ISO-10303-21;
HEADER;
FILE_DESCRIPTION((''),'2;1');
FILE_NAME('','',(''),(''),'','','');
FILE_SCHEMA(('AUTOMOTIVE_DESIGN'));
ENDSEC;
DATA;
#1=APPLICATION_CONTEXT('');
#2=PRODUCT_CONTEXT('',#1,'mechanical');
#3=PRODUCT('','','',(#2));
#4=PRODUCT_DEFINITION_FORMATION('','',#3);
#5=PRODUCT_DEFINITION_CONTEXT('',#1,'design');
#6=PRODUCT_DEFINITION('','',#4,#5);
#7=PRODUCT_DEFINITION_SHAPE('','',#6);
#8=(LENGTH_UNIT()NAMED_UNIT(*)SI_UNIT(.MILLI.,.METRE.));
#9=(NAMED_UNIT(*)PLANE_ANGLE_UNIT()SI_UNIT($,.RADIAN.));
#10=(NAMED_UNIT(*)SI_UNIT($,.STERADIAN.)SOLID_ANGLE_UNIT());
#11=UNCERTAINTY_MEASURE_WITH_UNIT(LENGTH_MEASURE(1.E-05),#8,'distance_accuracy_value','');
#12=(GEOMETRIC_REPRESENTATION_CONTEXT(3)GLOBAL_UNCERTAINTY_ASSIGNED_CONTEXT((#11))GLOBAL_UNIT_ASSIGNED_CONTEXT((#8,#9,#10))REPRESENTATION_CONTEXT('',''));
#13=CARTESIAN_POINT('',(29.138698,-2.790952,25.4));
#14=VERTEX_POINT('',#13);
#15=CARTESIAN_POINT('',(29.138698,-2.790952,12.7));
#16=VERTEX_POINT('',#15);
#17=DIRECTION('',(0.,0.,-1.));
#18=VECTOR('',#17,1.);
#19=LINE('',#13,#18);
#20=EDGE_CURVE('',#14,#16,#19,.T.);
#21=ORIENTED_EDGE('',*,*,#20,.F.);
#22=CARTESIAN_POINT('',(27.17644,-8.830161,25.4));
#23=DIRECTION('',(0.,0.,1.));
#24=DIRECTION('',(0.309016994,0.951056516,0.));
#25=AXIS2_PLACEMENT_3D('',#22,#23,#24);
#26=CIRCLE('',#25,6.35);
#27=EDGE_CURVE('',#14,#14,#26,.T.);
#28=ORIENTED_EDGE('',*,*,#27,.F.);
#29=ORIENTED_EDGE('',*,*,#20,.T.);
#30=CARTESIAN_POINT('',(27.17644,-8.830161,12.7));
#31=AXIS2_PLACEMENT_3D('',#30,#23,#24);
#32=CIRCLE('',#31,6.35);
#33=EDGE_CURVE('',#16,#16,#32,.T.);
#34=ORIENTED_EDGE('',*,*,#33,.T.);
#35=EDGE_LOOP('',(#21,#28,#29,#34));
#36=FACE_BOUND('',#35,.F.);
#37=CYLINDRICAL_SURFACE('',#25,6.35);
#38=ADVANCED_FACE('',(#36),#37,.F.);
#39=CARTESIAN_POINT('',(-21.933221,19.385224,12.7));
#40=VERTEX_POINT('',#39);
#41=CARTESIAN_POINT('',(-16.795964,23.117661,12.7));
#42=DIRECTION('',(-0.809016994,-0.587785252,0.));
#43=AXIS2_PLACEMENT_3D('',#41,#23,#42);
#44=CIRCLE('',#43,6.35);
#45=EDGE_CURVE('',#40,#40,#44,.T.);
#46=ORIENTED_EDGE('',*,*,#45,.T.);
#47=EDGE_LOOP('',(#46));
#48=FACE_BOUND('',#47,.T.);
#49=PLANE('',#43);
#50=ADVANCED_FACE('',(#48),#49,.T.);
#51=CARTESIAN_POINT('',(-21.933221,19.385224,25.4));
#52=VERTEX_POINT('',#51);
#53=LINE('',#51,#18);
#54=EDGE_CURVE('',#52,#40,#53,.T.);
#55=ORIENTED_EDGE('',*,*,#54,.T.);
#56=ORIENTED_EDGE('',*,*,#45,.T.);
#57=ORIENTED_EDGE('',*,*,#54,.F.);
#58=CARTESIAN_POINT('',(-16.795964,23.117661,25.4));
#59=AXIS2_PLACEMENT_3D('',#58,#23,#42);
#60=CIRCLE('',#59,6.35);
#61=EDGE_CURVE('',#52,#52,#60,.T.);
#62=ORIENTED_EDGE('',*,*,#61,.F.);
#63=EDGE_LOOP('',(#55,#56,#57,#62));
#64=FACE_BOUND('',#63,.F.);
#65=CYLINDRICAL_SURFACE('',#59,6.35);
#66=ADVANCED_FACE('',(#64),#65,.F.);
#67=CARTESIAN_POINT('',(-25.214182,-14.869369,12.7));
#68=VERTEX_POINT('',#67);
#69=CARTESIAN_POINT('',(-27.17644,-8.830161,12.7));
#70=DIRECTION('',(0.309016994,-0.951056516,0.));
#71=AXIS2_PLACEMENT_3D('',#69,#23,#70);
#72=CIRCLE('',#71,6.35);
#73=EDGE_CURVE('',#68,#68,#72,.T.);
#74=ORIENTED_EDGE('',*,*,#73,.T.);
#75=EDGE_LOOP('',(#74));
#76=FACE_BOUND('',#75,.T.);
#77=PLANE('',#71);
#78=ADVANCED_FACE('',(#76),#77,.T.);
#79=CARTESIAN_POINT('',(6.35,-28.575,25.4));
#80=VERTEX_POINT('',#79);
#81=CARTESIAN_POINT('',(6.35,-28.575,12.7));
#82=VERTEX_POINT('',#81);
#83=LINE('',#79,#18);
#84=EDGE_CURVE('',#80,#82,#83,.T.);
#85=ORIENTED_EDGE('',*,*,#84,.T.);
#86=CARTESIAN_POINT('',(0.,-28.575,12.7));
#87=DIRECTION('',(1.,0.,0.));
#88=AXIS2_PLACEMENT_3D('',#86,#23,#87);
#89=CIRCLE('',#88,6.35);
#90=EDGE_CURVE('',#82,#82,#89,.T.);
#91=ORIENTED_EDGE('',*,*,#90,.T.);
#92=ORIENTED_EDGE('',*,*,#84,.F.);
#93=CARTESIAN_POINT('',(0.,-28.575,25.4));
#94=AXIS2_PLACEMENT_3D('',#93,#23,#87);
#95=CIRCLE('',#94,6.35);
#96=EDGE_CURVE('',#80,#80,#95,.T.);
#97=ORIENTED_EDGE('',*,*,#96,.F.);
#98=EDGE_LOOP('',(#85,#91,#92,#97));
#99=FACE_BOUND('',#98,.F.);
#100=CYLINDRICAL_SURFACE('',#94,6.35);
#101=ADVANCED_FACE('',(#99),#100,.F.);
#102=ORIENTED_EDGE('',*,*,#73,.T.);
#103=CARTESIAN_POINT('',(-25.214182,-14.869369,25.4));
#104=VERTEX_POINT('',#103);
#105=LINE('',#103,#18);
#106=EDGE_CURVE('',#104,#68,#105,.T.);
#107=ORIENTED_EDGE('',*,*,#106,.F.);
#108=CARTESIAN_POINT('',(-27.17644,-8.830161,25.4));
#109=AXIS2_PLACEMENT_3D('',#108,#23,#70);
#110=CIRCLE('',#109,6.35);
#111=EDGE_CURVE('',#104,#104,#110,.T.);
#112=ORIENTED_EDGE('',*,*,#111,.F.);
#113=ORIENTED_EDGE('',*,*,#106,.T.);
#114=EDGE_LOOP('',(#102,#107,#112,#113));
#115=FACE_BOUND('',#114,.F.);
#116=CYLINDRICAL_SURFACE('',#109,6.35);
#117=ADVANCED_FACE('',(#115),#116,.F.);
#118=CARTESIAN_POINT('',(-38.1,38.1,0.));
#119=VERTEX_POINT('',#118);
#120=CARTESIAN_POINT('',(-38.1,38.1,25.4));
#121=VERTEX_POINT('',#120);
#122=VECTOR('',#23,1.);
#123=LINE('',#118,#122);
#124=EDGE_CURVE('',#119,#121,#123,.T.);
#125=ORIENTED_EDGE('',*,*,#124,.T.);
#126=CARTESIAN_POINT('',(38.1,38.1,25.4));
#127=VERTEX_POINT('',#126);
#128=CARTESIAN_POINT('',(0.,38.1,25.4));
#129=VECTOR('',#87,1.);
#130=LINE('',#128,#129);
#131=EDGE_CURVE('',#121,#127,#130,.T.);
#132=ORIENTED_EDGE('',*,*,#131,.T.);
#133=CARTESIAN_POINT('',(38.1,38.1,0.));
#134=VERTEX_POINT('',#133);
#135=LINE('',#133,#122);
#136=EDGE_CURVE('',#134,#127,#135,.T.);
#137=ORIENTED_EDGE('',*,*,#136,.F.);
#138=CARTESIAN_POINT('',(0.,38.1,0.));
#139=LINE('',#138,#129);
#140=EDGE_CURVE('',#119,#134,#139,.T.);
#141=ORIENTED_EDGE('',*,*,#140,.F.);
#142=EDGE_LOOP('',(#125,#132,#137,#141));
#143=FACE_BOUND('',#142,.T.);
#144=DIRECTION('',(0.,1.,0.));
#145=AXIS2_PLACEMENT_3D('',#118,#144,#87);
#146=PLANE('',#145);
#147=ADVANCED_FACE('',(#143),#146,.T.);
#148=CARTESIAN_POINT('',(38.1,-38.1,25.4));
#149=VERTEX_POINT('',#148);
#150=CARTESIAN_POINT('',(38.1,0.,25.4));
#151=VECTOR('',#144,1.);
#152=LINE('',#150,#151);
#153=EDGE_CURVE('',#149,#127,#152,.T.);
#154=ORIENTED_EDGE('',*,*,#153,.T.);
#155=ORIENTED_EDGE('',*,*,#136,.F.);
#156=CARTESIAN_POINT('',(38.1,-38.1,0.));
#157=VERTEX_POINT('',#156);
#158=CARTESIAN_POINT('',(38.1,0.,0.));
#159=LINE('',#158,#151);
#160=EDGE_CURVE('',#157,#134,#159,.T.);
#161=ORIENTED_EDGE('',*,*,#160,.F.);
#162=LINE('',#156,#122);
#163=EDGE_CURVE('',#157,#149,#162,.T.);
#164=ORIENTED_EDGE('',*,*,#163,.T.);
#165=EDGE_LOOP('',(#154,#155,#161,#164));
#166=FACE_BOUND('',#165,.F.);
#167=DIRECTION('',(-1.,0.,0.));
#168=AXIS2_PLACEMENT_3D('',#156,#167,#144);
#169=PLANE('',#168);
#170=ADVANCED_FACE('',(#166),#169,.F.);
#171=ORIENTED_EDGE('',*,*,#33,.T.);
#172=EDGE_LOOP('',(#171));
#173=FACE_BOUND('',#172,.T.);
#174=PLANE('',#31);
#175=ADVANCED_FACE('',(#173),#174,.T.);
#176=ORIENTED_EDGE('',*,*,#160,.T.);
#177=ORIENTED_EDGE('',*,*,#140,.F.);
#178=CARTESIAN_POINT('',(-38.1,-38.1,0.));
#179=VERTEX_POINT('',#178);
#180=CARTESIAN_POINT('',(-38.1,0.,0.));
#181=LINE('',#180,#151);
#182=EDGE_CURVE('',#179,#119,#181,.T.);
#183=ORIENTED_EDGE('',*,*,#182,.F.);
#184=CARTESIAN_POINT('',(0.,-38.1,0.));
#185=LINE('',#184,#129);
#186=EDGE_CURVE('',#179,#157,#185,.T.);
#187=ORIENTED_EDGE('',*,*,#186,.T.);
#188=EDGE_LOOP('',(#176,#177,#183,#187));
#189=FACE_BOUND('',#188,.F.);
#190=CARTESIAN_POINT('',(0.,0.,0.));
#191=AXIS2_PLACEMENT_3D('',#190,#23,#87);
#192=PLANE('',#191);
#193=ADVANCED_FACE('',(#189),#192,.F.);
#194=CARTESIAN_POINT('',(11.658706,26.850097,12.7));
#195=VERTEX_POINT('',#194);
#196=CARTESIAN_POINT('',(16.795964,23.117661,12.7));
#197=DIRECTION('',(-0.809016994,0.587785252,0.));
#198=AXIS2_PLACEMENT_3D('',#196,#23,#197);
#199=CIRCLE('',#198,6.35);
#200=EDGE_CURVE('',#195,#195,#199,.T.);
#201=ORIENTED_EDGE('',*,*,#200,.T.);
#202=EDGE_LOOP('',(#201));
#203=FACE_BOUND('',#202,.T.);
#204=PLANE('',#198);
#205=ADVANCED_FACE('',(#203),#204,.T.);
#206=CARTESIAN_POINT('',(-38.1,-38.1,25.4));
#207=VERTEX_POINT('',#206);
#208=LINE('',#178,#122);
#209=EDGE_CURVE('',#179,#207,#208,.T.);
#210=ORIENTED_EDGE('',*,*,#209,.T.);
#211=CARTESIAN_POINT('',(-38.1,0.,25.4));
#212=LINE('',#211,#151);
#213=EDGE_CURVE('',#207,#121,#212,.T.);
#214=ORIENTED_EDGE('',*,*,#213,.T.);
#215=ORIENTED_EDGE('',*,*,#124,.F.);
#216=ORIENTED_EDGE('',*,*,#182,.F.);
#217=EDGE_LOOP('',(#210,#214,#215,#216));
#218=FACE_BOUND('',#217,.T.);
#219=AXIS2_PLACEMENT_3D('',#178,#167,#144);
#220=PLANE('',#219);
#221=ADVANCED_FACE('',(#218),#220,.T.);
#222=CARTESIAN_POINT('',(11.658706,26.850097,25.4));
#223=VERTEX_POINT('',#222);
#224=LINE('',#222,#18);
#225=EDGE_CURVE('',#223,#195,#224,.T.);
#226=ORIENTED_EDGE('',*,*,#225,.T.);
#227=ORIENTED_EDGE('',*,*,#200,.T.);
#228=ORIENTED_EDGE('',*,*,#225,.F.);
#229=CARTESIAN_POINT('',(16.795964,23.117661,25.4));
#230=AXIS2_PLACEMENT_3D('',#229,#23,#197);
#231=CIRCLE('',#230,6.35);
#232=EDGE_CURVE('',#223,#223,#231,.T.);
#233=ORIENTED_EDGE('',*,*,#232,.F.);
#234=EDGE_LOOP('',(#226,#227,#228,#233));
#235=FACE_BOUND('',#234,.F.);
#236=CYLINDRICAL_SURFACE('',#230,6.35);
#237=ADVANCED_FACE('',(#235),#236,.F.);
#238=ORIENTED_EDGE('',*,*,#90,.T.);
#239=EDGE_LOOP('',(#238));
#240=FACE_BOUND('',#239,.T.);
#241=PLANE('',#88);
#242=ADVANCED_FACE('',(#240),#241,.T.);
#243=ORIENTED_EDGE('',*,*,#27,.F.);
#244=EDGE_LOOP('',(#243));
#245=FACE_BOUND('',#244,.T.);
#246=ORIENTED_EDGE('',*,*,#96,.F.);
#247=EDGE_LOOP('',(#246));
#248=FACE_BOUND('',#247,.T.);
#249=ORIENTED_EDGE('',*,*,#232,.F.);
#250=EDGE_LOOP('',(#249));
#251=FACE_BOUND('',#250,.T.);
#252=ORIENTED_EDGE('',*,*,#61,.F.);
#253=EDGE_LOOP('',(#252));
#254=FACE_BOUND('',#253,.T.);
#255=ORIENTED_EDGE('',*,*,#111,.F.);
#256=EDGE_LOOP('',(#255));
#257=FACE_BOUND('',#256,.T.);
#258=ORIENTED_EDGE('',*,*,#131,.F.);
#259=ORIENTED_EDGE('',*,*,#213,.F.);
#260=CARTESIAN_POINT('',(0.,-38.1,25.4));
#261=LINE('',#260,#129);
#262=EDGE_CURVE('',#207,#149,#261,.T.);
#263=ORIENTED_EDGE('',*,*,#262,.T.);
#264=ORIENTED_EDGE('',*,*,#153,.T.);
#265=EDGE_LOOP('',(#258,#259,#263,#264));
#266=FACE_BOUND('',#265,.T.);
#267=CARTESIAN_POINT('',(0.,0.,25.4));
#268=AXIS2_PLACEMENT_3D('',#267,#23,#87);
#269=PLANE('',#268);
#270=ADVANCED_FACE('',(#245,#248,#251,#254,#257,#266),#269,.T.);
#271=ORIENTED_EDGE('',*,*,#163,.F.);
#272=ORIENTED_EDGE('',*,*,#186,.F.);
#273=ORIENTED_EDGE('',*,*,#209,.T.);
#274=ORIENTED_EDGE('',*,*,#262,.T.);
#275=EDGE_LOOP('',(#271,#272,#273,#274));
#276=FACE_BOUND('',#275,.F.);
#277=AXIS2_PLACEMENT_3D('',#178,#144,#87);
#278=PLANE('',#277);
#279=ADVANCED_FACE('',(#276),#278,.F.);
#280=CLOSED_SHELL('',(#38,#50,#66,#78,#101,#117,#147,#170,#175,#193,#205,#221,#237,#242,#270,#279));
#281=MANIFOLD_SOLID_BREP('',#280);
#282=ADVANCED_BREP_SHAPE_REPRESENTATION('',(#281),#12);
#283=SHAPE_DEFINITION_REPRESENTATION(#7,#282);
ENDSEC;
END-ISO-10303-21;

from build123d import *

# Parameters (mm, degrees)
F0_W            = 76.2
F0_H            = 76.2
F1_DEPTH        = 25.4
F2_R            = 6.35
F3_DEPTH        = 12.7
F3_COPIES_COUNT = 5


# Not quite as in the source:
# - a pattern or mirror of a feature is missing from the dataset's text; its kind, count and spacing are read off the source's solid


with BuildPart() as f1:
    # F0 (on Top) → F1 (new body)
    with BuildSketch(Plane.XY):
        Rectangle(F0_W, F0_H)
    extrude(amount=F1_DEPTH)

    # F2 (on face) → F3 (cut)
    with BuildSketch(Plane.XY.offset(25.4)):
        with Locations((0, -28.575)):
            Circle(F2_R)
    f3 = extrude(amount=-F3_DEPTH, mode=Mode.SUBTRACT)

    # F3_copies: F3 ×5 about axis
    f3_copies_axis = Axis((0, 0, 0), (0, 0, 1))
    for i in range(1, F3_COPIES_COUNT):
        add(f3.rotate(f3_copies_axis, i * 360 / F3_COPIES_COUNT), mode=Mode.SUBTRACT)


solid = f1.part
